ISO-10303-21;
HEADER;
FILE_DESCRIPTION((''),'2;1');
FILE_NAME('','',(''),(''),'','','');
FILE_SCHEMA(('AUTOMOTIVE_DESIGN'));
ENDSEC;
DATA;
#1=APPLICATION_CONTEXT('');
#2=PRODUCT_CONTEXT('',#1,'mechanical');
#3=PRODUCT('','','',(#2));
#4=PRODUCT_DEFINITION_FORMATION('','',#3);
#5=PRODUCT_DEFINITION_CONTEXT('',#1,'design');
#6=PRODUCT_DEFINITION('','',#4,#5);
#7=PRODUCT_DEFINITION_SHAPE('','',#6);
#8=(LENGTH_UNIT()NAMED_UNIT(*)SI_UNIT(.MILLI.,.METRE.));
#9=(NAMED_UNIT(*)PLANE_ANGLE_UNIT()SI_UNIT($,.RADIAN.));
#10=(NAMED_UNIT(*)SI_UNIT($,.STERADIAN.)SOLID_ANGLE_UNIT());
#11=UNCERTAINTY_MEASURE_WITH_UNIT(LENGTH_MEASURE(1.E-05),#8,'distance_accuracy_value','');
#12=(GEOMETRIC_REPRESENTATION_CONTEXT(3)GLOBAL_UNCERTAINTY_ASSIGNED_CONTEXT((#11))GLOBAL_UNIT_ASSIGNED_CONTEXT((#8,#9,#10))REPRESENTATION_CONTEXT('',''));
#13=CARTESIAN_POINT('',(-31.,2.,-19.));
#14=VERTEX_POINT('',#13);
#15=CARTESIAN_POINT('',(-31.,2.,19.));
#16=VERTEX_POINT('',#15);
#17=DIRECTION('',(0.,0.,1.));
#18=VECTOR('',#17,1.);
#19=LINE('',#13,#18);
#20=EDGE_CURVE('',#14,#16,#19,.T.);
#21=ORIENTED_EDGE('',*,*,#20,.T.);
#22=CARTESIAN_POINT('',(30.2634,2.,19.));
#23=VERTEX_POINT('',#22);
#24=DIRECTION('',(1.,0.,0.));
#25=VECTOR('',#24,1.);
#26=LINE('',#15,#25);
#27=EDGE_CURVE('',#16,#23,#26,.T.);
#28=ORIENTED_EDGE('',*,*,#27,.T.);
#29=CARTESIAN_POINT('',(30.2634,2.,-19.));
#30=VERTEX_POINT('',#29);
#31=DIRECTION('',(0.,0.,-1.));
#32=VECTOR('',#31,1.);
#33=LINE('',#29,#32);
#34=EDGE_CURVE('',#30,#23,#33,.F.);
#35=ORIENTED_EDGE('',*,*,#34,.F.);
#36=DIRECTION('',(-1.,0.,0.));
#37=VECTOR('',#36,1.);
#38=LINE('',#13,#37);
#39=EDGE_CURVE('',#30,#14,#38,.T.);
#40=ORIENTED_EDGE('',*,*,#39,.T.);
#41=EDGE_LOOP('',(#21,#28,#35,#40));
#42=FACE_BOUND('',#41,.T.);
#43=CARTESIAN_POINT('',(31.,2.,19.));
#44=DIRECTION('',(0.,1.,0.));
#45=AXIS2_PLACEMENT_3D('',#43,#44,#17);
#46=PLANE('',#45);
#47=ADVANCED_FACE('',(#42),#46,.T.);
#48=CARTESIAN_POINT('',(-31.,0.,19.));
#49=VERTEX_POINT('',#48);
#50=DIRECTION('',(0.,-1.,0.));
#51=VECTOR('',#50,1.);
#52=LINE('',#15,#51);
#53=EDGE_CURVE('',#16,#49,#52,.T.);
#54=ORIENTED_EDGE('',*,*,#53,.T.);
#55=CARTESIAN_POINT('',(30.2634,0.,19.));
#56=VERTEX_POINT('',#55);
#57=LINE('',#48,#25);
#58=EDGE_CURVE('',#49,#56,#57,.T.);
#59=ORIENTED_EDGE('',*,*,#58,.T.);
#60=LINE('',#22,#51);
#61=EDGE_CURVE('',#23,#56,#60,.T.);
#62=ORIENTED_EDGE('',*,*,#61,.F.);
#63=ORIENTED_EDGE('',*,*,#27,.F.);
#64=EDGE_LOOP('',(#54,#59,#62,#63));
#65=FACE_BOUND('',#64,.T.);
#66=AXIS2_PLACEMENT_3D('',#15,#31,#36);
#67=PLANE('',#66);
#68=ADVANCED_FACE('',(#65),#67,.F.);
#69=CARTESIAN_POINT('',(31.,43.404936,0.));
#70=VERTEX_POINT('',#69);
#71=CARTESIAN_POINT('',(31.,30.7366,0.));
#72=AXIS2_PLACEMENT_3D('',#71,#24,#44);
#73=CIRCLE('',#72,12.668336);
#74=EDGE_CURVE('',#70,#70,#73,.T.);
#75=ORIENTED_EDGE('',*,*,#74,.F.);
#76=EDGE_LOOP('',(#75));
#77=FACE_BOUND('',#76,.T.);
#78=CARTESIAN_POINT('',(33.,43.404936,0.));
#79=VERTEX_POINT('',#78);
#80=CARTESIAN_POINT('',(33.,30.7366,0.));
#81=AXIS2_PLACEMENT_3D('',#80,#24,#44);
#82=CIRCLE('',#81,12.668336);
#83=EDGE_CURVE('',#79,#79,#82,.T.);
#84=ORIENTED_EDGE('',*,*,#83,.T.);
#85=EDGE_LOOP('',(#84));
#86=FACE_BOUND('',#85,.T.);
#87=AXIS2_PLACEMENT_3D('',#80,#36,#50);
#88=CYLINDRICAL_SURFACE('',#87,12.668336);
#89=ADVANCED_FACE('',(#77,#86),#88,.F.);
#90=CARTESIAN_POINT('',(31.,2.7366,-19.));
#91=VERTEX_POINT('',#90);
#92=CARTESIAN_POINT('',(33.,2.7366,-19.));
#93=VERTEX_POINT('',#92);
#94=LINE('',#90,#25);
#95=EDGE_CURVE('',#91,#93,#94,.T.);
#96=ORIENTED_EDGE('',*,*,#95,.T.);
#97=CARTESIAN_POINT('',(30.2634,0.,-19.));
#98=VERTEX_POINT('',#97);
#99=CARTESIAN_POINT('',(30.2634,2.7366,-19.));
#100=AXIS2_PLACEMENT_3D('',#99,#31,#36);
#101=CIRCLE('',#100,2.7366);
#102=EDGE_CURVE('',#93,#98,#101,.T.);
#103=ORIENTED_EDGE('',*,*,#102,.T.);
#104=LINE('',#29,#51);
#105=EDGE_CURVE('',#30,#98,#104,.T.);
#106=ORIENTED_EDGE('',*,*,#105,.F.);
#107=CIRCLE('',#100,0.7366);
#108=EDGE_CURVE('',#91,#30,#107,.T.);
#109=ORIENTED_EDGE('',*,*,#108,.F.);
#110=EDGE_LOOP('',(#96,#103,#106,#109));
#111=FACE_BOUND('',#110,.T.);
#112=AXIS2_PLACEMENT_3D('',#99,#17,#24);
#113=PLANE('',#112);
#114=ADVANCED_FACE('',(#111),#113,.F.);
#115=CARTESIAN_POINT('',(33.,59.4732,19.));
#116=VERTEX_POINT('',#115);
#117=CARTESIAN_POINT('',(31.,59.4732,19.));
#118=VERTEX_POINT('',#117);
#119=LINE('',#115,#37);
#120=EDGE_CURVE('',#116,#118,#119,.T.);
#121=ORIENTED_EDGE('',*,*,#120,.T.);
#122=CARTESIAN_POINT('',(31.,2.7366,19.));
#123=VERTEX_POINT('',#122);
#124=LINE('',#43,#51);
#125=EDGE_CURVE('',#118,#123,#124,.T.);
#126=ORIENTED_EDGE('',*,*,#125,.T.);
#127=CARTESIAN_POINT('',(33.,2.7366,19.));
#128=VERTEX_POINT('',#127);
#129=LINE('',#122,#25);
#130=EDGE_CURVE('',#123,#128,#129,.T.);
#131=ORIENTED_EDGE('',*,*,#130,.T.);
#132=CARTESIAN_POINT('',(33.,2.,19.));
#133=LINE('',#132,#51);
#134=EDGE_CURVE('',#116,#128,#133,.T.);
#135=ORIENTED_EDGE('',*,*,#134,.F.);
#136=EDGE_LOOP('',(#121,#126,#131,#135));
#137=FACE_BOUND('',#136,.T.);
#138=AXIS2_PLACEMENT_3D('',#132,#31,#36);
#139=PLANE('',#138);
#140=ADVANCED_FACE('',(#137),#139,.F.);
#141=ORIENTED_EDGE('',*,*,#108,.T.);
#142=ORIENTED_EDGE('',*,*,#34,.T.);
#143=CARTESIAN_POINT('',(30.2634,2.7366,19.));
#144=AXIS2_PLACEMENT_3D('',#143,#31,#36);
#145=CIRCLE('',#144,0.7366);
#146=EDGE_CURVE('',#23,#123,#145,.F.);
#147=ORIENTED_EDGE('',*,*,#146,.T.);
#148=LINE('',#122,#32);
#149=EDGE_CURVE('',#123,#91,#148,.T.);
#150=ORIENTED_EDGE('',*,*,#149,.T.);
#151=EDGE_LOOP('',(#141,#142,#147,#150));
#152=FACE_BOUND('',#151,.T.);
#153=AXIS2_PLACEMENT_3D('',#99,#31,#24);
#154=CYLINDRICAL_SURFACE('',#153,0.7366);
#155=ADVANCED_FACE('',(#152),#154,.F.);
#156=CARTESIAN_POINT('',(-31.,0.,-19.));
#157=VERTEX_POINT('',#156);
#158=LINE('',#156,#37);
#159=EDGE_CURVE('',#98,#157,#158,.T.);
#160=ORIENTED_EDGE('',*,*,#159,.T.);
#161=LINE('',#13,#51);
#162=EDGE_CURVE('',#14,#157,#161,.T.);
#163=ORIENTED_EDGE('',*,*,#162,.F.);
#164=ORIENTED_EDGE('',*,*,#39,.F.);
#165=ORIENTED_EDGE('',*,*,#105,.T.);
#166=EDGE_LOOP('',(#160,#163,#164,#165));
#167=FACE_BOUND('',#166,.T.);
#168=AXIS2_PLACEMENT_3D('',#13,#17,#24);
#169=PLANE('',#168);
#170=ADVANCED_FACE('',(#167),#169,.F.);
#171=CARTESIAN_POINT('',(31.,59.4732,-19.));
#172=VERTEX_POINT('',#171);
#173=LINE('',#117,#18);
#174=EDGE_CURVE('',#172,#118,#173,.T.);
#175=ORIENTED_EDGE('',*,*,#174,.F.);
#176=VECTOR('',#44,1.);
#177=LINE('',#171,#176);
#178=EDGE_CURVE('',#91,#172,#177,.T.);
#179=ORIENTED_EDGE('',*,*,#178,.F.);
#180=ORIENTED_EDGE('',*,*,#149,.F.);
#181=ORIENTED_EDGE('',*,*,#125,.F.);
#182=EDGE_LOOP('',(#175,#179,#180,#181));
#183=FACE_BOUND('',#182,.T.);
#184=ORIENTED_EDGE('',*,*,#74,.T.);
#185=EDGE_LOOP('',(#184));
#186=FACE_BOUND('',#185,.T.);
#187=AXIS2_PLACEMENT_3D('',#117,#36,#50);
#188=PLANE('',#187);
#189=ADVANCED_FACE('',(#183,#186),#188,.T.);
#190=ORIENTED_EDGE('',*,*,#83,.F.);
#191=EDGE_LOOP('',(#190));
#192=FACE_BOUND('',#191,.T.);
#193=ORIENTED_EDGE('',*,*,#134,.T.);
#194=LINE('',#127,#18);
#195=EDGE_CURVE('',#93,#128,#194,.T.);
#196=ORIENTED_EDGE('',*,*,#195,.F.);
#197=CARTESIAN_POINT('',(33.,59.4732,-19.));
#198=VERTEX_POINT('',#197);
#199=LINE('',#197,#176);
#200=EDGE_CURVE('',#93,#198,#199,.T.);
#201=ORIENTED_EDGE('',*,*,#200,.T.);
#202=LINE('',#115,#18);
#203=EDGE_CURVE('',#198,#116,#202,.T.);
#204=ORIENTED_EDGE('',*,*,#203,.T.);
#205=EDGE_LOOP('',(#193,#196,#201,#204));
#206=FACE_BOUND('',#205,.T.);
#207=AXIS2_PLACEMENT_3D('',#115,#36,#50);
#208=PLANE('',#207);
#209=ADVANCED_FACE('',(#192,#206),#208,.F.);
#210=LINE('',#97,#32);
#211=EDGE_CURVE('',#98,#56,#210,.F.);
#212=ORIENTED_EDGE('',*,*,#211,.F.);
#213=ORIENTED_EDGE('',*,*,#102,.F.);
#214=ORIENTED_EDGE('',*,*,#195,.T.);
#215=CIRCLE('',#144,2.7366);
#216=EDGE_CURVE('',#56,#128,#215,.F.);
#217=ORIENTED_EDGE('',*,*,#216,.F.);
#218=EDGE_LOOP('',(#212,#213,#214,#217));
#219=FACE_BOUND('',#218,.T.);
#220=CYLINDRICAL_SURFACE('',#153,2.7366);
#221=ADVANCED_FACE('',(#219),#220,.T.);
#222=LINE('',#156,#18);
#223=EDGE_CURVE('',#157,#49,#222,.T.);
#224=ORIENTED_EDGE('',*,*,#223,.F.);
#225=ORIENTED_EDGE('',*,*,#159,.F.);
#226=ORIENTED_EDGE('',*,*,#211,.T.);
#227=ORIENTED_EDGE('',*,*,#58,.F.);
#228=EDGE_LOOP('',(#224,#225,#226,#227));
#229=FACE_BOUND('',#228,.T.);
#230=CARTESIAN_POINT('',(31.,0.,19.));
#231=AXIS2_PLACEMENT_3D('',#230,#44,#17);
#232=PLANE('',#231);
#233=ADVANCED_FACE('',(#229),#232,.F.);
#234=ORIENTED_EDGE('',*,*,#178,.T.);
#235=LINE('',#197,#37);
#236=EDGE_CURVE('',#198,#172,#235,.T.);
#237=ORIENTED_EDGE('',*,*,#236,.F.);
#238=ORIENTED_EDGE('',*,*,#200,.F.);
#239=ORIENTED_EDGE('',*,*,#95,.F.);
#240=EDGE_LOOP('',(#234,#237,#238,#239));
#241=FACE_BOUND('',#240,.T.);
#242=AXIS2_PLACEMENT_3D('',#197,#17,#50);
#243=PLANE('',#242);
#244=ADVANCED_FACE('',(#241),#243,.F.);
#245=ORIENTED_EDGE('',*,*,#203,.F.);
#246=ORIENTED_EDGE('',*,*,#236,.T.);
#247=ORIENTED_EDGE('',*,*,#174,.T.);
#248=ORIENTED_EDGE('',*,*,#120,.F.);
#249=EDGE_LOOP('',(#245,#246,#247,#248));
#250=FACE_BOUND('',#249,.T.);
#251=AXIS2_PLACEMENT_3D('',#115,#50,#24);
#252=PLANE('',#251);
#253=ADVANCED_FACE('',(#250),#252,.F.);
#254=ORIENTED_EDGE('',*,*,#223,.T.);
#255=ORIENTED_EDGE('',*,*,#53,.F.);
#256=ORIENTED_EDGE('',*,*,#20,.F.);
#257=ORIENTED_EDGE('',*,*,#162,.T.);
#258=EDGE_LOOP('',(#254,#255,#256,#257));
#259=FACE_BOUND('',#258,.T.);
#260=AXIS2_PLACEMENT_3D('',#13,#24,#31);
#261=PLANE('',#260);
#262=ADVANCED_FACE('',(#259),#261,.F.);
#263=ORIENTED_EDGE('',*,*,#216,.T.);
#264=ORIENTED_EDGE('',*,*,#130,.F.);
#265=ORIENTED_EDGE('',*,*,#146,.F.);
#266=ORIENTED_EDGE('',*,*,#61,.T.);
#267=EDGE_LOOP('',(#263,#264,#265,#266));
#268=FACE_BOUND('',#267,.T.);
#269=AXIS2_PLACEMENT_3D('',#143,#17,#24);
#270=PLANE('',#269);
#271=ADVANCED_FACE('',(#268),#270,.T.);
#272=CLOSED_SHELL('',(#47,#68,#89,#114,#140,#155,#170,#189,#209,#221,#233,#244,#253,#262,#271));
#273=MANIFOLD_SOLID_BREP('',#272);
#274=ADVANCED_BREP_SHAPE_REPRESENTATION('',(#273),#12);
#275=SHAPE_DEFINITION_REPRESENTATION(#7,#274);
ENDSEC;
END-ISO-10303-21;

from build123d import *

# Parameters (mm, degrees)
SKETCH_1_W                       = 62
SKETCH_1_H                       = 38
SM_BASE_FLANGE_1_DEPTH           = 2
SM_EDGE_FLANGE_1_STRIP_W         = 9.4732
SM_EDGE_FLANGE_1_STRIP_H         = 2
SM_EDGE_FLANGE_1_STRIP_CUT_DEPTH = 38
SM_EDGE_FLANGE_1_DEPTH           = 38
SM_START                         = 2
SM_EDGE_FLANGE_1_PROFILE_W       = 38
SM_EDGE_FLANGE_1_PROFILE_H       = 56.7366
SM_EDGE_FLANGE_1_PROFILE_R       = 12.668336417
SM_EDGE_FLANGE_1_FLAT_DEPTH      = 2


# Sheet-metal steps are written as plain solids
with BuildPart() as part:
    # Sketch 1 → 基材-凸緣1 (new body)
    with BuildSketch(Plane(origin=(0, 0, 0), x_dir=(1, 0, 0), z_dir=(0, 1, 0))):
        Rectangle(SKETCH_1_W, SKETCH_1_H)
    extrude(amount=SM_BASE_FLANGE_1_DEPTH)

    # 邊線-凸緣1 strip (across the edge) → 邊線-凸緣1 strip cut (cut)
    with BuildSketch(Plane(origin=(31, 2, 19), x_dir=(-1, 0, 0), z_dir=(0, 0, -1))):
        with Locations((-4, -1)):
            Rectangle(SM_EDGE_FLANGE_1_STRIP_W, SM_EDGE_FLANGE_1_STRIP_H)
    extrude(amount=SM_EDGE_FLANGE_1_STRIP_CUT_DEPTH, mode=Mode.SUBTRACT)

    # 邊線-凸緣1 bend section (across the edge) → 邊線-凸緣1 (add)
    with BuildSketch(Plane(origin=(31, 2, 19), x_dir=(-1, 0, 0), z_dir=(0, 0, -1))):
        with BuildLine():
            Line((-2, 0.7366), (0, 0.7366))
            ThreePointArc((0, 0.7366), (0.215745145, 0.215745145), (0.7366, 0))
            Line((0.7366, 0), (0.7366, -2))
            ThreePointArc((0.7366, -2), (-1.198468417, -1.198468417), (-2, 0.7366))
        make_face()
    extrude(amount=SM_EDGE_FLANGE_1_DEPTH)

    # 邊線-凸緣1 profile (on flange) → 邊線-凸緣1 flat (add)
    with BuildSketch(Plane(origin=(31, 2, 0), x_dir=(0, 0, -1), z_dir=(1, 0, 0)).offset(SM_START)):
        with Locations((0, 29.1049)):
            Rectangle(SM_EDGE_FLANGE_1_PROFILE_W, SM_EDGE_FLANGE_1_PROFILE_H)
        with Locations((0, 28.7366)):
            Circle(SM_EDGE_FLANGE_1_PROFILE_R, mode=Mode.SUBTRACT)
    extrude(amount=-SM_EDGE_FLANGE_1_FLAT_DEPTH)


solid = part.part
